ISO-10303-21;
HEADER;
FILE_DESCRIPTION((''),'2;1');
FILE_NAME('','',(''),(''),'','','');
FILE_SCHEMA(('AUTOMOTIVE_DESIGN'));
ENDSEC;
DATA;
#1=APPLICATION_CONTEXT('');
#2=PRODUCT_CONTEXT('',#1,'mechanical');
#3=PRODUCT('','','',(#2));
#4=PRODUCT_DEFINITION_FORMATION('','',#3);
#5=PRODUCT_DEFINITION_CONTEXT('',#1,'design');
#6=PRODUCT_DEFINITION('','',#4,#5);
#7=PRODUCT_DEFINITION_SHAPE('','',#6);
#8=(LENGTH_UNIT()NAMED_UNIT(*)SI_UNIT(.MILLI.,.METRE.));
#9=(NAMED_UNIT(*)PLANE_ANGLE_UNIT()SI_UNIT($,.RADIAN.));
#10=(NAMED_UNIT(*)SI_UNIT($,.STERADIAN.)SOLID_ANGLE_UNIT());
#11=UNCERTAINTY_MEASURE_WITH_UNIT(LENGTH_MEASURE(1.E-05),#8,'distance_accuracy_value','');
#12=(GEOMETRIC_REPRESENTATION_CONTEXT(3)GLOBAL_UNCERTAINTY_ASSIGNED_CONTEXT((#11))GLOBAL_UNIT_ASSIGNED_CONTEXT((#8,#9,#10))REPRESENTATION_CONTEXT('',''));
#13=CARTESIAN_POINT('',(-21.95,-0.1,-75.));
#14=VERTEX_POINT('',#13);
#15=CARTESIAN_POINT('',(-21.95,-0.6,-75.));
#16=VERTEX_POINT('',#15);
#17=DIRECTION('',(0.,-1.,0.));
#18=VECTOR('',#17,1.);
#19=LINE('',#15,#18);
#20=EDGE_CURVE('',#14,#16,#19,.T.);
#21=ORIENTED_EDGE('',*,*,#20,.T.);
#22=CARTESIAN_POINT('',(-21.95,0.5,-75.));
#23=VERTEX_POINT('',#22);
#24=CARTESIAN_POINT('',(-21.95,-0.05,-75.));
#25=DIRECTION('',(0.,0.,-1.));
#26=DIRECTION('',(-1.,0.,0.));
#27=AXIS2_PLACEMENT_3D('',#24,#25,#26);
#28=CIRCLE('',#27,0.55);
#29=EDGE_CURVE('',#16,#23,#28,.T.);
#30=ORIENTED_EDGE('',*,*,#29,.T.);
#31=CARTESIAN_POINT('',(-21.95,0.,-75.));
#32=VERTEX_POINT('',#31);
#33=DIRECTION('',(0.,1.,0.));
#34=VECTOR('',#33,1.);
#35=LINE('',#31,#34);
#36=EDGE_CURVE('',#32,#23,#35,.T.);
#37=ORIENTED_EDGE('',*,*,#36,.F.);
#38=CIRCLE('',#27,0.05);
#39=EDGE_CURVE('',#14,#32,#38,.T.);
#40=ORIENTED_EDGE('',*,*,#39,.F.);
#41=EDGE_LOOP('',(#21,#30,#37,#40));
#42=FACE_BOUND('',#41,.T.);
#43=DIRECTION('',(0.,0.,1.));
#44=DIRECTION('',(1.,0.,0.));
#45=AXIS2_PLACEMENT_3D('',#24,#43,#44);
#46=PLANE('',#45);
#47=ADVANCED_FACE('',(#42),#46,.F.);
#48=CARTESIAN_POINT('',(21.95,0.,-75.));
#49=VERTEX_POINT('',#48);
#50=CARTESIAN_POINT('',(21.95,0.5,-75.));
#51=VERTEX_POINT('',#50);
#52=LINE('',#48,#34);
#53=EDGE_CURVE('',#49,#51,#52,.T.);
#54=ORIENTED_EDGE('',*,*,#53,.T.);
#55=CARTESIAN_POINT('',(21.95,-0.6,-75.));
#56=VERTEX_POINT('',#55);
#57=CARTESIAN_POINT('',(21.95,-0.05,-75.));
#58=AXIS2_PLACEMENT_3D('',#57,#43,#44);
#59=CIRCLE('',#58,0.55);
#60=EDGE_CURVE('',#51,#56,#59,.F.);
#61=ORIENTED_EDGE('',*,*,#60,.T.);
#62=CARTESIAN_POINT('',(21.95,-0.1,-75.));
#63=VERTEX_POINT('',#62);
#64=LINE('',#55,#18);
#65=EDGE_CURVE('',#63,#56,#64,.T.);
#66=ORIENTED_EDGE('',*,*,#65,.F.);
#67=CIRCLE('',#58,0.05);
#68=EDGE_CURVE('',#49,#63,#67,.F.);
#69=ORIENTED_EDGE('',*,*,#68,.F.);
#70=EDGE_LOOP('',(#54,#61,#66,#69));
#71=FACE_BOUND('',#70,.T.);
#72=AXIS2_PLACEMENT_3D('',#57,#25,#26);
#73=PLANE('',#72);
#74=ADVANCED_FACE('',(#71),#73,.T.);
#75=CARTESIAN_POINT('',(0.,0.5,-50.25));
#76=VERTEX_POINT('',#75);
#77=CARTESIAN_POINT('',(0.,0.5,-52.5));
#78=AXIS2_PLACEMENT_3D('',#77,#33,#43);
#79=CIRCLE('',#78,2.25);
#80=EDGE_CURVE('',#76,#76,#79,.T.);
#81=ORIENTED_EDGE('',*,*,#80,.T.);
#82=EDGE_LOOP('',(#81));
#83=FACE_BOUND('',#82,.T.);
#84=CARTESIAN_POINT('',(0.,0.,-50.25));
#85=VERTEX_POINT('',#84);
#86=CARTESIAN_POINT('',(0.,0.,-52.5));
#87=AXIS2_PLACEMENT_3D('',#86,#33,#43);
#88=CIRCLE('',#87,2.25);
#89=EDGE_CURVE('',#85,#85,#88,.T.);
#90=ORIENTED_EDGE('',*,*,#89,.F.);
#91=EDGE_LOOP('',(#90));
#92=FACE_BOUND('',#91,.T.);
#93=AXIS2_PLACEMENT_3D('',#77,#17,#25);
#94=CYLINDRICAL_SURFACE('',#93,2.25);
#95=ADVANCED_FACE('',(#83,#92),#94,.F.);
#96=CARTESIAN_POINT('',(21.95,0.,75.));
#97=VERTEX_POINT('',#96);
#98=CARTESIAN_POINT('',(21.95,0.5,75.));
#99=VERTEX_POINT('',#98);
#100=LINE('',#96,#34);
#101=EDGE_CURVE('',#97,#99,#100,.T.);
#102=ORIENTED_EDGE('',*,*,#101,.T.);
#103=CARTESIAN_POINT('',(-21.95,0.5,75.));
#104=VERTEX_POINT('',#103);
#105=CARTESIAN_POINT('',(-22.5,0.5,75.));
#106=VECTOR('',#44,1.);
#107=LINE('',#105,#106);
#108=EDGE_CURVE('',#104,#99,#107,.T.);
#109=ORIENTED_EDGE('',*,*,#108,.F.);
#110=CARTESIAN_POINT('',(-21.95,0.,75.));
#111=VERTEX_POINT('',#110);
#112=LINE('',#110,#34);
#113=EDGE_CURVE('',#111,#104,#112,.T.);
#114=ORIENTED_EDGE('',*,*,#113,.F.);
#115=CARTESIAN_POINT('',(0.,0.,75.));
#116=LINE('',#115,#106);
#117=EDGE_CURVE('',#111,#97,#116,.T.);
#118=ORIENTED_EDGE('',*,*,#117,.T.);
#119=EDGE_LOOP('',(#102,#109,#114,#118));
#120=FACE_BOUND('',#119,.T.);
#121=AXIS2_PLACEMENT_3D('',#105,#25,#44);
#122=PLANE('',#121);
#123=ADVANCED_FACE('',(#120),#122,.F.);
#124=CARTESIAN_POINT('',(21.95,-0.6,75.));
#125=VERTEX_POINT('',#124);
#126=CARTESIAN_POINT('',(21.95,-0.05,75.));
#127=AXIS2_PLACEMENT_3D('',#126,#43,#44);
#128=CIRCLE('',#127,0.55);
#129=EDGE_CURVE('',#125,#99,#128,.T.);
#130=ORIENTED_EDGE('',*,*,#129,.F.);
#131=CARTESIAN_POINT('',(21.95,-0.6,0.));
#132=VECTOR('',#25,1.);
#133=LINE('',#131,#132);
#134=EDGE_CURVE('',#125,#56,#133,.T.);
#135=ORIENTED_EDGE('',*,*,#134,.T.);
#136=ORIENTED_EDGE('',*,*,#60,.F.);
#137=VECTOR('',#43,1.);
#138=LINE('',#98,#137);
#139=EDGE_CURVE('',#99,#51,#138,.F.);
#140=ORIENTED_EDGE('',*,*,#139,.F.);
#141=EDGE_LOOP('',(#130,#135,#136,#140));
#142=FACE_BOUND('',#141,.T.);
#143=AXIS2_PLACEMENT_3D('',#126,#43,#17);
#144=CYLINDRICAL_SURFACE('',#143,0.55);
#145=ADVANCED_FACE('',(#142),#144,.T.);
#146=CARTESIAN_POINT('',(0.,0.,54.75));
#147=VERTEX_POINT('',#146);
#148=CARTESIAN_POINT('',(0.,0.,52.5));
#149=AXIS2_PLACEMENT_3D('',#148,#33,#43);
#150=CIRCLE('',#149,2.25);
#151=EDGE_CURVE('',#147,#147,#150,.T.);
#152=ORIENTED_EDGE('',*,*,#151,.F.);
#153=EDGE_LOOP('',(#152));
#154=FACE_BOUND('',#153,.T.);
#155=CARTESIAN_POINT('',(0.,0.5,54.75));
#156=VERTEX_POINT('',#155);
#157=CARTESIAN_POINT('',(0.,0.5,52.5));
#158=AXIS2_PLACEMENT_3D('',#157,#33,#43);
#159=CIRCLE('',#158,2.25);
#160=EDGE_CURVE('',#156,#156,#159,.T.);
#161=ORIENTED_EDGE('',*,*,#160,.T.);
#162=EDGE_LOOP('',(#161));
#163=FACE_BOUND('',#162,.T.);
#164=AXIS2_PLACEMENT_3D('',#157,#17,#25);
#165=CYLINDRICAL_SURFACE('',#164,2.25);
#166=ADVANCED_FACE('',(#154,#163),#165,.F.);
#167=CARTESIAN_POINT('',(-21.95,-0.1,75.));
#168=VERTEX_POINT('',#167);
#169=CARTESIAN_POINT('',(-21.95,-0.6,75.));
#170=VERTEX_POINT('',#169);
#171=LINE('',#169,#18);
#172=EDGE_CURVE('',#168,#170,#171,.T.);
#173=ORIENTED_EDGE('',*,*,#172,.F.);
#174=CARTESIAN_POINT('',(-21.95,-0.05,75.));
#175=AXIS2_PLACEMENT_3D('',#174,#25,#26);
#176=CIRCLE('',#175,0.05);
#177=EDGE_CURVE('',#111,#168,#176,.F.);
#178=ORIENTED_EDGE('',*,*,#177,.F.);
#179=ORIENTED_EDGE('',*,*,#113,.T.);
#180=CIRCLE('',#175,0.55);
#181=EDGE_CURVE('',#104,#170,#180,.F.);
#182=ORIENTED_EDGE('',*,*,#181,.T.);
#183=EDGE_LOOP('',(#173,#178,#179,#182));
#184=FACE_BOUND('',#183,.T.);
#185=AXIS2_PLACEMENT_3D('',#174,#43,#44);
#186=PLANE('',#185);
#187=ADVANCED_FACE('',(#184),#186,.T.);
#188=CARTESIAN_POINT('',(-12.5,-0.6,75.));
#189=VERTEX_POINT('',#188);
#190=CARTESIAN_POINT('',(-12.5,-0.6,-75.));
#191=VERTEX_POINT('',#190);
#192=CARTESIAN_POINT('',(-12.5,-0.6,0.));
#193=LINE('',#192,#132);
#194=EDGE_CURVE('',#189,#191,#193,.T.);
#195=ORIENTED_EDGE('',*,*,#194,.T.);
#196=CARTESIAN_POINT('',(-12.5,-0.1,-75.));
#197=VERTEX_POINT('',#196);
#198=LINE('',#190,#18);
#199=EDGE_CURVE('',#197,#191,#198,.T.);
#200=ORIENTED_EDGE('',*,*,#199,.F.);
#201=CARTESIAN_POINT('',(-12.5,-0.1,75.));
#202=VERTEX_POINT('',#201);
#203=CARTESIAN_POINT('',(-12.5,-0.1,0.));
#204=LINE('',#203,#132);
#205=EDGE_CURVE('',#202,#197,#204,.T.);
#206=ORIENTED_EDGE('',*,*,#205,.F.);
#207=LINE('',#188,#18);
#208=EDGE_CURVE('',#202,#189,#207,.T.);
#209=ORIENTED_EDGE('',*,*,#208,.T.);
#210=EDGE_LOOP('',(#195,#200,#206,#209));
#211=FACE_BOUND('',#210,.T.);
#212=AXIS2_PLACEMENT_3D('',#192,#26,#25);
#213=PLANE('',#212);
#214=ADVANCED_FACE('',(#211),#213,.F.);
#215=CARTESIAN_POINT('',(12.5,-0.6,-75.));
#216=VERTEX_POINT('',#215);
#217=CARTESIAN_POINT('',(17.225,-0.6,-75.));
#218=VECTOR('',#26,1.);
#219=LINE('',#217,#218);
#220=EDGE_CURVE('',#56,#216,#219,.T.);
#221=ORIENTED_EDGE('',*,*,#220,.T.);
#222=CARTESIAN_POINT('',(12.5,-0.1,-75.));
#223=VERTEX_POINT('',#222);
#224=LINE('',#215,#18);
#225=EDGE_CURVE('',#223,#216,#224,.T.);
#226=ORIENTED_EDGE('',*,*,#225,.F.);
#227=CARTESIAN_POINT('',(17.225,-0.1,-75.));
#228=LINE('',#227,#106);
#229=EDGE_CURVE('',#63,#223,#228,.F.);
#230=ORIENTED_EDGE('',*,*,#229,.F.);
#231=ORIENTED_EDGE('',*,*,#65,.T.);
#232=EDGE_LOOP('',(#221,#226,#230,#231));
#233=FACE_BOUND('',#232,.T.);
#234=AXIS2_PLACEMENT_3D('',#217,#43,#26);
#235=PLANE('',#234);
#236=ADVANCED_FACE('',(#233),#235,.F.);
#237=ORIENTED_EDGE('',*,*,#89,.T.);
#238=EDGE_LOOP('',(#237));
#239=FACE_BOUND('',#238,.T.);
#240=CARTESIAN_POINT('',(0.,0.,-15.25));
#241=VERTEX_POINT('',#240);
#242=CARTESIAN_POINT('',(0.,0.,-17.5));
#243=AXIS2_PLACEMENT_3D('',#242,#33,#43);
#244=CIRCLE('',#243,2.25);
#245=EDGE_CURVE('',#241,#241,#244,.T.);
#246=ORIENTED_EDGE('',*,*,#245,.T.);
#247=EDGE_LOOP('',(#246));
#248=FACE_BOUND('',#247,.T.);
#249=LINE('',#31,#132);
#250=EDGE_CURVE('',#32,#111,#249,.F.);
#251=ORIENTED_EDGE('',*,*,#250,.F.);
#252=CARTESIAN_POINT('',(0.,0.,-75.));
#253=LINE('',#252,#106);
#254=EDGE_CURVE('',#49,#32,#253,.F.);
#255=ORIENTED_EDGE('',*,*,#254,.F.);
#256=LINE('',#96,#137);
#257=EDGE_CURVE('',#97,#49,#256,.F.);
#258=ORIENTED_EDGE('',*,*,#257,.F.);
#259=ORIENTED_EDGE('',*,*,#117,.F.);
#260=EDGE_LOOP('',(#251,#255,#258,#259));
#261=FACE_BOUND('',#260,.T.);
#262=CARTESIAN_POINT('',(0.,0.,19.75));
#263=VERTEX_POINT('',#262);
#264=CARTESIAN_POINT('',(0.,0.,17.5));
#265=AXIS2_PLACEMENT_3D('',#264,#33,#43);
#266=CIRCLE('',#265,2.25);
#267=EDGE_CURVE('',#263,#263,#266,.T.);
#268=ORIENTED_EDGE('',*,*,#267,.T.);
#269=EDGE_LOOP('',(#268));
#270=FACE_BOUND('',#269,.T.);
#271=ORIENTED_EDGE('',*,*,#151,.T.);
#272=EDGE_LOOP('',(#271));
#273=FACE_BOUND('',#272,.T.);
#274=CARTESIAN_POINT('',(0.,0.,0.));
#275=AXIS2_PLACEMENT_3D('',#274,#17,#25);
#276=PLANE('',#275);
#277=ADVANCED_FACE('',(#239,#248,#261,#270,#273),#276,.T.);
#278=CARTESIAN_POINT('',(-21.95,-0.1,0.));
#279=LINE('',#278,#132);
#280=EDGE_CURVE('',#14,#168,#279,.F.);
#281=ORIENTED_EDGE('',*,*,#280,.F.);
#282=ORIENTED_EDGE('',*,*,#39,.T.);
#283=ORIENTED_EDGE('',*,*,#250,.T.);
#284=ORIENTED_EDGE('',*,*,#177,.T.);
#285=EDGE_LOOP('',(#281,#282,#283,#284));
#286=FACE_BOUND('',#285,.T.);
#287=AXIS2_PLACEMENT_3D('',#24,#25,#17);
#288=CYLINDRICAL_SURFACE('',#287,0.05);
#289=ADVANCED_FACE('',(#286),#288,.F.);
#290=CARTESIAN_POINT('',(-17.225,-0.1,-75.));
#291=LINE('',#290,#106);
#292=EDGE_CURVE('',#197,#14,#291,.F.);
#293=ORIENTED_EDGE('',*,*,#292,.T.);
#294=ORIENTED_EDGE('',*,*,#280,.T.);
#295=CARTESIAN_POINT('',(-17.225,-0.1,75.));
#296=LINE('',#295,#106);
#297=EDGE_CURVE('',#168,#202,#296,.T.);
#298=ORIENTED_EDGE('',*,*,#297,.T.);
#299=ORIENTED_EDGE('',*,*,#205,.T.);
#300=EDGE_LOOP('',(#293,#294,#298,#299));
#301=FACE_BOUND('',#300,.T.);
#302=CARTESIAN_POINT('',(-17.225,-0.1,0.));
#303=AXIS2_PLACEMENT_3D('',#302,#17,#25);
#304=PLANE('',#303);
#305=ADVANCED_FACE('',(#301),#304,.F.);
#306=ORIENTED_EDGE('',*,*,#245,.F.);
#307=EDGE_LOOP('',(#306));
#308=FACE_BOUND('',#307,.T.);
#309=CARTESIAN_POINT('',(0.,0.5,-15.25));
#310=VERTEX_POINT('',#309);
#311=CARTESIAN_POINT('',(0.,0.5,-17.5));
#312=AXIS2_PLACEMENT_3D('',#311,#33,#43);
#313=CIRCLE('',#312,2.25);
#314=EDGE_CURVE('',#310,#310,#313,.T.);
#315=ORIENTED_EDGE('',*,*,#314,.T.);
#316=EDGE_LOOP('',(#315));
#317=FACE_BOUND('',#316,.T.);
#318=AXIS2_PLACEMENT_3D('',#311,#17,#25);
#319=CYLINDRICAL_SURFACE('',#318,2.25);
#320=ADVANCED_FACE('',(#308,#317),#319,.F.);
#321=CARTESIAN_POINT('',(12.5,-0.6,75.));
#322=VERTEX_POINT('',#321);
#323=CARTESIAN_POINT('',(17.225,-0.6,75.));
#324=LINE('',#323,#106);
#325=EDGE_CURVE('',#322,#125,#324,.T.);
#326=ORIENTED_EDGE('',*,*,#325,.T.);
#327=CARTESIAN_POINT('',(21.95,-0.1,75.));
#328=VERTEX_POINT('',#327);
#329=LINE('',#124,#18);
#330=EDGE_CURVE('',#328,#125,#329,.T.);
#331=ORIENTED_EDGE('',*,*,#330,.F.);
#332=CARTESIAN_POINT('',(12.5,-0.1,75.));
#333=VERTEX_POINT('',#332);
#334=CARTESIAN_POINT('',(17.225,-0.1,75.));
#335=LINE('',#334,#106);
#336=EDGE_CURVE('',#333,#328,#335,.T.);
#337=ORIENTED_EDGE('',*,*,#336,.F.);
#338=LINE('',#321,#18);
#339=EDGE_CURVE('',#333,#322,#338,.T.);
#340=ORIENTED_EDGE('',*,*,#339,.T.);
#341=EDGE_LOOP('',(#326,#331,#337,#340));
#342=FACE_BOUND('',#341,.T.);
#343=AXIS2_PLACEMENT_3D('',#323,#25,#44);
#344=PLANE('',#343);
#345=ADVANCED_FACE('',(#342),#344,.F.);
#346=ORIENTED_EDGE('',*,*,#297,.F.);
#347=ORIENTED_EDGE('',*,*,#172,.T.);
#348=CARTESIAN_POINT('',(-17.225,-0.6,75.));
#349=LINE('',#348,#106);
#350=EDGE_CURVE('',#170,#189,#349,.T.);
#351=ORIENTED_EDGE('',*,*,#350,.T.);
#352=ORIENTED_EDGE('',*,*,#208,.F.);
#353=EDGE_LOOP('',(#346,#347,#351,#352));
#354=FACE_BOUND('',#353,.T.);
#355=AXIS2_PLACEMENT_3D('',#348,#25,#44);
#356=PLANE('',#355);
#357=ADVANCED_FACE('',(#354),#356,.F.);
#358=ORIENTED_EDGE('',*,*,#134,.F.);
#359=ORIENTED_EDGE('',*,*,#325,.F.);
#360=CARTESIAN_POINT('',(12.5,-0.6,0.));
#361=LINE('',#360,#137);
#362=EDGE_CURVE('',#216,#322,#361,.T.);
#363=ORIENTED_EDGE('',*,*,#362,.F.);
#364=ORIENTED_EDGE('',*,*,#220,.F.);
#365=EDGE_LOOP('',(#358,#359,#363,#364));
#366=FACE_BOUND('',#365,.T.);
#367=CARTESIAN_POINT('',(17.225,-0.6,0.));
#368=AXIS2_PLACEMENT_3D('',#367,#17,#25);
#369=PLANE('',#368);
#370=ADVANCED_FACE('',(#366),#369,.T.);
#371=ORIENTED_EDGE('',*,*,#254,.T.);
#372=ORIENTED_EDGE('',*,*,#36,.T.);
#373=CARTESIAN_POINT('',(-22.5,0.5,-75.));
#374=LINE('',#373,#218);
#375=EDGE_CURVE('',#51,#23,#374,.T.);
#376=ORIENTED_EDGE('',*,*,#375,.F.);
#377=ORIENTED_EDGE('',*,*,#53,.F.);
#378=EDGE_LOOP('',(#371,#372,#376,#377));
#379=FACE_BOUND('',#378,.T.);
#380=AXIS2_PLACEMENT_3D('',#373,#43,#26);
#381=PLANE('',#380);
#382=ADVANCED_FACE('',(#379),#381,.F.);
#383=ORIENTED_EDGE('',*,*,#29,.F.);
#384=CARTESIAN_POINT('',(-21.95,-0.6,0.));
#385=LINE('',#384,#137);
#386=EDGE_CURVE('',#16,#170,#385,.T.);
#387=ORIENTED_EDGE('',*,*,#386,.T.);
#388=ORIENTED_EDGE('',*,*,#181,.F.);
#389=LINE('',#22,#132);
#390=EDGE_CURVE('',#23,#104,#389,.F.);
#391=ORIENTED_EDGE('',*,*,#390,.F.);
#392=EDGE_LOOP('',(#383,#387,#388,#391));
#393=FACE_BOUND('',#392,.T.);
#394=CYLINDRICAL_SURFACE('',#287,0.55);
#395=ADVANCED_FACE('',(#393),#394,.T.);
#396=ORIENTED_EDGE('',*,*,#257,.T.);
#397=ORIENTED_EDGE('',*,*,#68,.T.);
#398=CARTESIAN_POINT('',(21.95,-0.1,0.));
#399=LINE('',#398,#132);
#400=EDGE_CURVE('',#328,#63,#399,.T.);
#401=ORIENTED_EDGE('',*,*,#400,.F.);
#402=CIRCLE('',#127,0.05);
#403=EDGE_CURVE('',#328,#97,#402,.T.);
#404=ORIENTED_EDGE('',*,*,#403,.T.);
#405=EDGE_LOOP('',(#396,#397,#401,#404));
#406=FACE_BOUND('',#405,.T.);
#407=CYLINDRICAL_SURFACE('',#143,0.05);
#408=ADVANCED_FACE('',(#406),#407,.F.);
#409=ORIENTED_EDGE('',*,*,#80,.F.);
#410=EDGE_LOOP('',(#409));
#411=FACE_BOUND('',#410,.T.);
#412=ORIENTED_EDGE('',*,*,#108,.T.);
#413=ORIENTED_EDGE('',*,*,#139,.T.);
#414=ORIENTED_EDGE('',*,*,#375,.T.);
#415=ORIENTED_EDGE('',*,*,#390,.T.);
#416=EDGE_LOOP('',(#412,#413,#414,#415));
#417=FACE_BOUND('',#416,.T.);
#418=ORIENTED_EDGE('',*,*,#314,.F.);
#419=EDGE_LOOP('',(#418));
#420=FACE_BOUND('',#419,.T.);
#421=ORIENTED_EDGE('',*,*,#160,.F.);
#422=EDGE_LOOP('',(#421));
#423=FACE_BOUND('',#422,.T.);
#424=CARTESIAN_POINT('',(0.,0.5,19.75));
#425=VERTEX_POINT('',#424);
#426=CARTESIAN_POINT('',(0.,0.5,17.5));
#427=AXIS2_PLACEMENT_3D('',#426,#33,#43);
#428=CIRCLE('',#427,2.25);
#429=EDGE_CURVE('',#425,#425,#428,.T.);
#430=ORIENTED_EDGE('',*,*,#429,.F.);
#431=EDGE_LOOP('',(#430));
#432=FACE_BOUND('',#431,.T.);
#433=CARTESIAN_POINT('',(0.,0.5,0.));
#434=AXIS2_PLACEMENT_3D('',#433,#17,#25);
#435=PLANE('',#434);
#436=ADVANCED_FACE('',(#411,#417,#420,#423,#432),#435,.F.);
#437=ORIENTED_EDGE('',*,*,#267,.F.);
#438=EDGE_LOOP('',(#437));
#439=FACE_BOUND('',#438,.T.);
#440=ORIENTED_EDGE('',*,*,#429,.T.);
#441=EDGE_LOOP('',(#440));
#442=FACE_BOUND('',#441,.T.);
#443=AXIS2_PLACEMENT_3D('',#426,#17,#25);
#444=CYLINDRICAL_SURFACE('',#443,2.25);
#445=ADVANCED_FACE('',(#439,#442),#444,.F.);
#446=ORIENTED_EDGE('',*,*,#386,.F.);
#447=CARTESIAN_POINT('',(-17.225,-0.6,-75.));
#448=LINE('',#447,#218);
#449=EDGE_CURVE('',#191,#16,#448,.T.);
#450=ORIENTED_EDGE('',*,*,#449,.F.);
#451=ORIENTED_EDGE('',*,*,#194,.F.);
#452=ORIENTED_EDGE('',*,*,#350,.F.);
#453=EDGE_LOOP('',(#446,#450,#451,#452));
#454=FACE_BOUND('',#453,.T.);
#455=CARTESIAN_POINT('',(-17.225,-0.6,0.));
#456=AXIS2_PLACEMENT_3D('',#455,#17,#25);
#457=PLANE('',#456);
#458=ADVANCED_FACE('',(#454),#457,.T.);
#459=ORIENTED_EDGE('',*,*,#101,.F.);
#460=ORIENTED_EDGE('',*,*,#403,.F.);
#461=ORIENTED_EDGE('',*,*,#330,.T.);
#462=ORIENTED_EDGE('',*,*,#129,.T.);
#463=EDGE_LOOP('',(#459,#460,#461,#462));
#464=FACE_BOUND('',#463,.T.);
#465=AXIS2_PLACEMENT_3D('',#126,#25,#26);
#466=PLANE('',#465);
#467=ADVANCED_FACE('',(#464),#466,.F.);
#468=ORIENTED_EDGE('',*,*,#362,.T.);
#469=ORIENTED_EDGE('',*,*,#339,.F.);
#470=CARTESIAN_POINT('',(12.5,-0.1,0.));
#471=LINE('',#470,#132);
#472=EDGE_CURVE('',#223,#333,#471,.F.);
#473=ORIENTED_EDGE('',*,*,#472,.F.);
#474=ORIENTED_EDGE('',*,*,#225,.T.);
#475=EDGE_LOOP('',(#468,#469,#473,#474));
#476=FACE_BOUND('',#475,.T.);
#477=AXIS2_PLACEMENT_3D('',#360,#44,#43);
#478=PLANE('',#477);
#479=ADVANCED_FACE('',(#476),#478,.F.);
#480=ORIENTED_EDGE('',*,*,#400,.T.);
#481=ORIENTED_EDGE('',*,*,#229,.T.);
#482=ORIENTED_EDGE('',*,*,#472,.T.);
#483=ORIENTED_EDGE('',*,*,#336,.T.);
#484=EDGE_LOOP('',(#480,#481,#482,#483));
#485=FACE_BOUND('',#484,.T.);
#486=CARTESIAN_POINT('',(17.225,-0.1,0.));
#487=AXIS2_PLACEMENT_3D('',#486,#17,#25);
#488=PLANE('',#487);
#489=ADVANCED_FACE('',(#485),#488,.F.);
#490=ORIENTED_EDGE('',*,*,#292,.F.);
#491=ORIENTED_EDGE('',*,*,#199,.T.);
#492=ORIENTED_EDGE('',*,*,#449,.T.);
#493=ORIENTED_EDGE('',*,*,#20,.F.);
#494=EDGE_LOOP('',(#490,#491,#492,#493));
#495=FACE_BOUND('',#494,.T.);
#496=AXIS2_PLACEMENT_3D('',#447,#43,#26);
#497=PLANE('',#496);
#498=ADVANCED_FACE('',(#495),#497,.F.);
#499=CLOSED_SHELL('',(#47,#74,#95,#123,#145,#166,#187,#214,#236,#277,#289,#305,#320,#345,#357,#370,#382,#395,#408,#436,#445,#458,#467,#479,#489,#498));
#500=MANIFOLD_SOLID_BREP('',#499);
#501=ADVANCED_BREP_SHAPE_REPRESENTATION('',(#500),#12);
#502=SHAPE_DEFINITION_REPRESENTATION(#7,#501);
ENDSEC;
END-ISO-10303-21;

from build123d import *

# Parameters (mm, degrees)
SKETCH1_W           = 45
SKETCH1_H           = 150
BOSS_EXTRUDE1_DEPTH = 0.5
SKETCH2_R           = 2.25
CUT_EXTRUDE1_DEPTH  = 10.5
HEM1_START          = -75
HEM1_DEPTH          = 150
HEM1_2_DEPTH        = 150


# Read off the part's stored shape, not the designer's step: Hem1
with BuildPart() as part:
    # Sketch1 → Boss-Extrude1 (new body)
    with BuildSketch(Plane(origin=(0, 0, 0), x_dir=(1, 0, 0), z_dir=(0, 1, 0))):
        Rectangle(SKETCH1_W, SKETCH1_H)
    extrude(amount=BOSS_EXTRUDE1_DEPTH)

    # Sketch2 → Cut-Extrude1 (cut)
    with BuildSketch(Plane(origin=(0, 0.5, 0), x_dir=(1, 0, 0), z_dir=(0, 1, 0))):
        with Locations(Location((0, 52.5, 0), (0, 0, 270))):
            Circle(SKETCH2_R)
        with Locations(Location((0, 17.5, 0), (0, 0, 270))):
            Circle(SKETCH2_R)
        with Locations(Location((0, -17.5, 0), (0, 0, 270))):
            Circle(SKETCH2_R)
        with Locations(Location((0, -52.5, 0), (0, 0, 270))):
            Circle(SKETCH2_R)
    extrude(amount=-CUT_EXTRUDE1_DEPTH, mode=Mode.SUBTRACT)

    # Hem1 outline → Hem1 (cut)
    with BuildSketch(Plane.XY.offset(HEM1_START)):
        with BuildLine():
            ThreePointArc((21.95, 0.5), (22.320809924, 0.35620192), (22.497722558, 0))
            Line((22.497722558, 0), (22.5, 0))
            Line((22.5, 0), (22.5, 0.5))
            Line((22.5, 0.5), (21.95, 0.5))
        make_face()
        with BuildLine():
            ThreePointArc((-22.497722558, 0), (-22.320809924, 0.35620192), (-21.95, 0.5))
            Line((-21.95, 0.5), (-22.5, 0.5))
            Line((-22.5, 0.5), (-22.5, 0))
            Line((-22.5, 0), (-22.497722558, 0))
        make_face()
    extrude(amount=HEM1_DEPTH, mode=Mode.SUBTRACT)

    # Hem1 2 outline → Hem1 2 (add)
    with BuildSketch(Plane.XY.offset(HEM1_START)):
        with BuildLine():
            Line((12.5, -0.1), (12.5, -0.6))
            Line((12.5, -0.6), (21.95, -0.6))
            ThreePointArc((21.95, -0.6), (22.35620192, -0.420809924), (22.497722558, 0))
            Line((22.497722558, 0), (21.95, 0))
            ThreePointArc((21.95, 0), (22, -0.05), (21.95, -0.1))
            Line((21.95, -0.1), (12.5, -0.1))
        make_face()
        with BuildLine():
            ThreePointArc((-21.95, -0.1), (-22, -0.05), (-21.95, 0))
            Line((-21.95, 0), (-22.497722558, 0))
            ThreePointArc((-22.497722558, 0), (-22.35620192, -0.420809924), (-21.95, -0.6))
            Line((-21.95, -0.6), (-12.5, -0.6))
            Line((-12.5, -0.6), (-12.5, -0.1))
            Line((-12.5, -0.1), (-21.95, -0.1))
        make_face()
    extrude(amount=HEM1_2_DEPTH)


solid = part.part
